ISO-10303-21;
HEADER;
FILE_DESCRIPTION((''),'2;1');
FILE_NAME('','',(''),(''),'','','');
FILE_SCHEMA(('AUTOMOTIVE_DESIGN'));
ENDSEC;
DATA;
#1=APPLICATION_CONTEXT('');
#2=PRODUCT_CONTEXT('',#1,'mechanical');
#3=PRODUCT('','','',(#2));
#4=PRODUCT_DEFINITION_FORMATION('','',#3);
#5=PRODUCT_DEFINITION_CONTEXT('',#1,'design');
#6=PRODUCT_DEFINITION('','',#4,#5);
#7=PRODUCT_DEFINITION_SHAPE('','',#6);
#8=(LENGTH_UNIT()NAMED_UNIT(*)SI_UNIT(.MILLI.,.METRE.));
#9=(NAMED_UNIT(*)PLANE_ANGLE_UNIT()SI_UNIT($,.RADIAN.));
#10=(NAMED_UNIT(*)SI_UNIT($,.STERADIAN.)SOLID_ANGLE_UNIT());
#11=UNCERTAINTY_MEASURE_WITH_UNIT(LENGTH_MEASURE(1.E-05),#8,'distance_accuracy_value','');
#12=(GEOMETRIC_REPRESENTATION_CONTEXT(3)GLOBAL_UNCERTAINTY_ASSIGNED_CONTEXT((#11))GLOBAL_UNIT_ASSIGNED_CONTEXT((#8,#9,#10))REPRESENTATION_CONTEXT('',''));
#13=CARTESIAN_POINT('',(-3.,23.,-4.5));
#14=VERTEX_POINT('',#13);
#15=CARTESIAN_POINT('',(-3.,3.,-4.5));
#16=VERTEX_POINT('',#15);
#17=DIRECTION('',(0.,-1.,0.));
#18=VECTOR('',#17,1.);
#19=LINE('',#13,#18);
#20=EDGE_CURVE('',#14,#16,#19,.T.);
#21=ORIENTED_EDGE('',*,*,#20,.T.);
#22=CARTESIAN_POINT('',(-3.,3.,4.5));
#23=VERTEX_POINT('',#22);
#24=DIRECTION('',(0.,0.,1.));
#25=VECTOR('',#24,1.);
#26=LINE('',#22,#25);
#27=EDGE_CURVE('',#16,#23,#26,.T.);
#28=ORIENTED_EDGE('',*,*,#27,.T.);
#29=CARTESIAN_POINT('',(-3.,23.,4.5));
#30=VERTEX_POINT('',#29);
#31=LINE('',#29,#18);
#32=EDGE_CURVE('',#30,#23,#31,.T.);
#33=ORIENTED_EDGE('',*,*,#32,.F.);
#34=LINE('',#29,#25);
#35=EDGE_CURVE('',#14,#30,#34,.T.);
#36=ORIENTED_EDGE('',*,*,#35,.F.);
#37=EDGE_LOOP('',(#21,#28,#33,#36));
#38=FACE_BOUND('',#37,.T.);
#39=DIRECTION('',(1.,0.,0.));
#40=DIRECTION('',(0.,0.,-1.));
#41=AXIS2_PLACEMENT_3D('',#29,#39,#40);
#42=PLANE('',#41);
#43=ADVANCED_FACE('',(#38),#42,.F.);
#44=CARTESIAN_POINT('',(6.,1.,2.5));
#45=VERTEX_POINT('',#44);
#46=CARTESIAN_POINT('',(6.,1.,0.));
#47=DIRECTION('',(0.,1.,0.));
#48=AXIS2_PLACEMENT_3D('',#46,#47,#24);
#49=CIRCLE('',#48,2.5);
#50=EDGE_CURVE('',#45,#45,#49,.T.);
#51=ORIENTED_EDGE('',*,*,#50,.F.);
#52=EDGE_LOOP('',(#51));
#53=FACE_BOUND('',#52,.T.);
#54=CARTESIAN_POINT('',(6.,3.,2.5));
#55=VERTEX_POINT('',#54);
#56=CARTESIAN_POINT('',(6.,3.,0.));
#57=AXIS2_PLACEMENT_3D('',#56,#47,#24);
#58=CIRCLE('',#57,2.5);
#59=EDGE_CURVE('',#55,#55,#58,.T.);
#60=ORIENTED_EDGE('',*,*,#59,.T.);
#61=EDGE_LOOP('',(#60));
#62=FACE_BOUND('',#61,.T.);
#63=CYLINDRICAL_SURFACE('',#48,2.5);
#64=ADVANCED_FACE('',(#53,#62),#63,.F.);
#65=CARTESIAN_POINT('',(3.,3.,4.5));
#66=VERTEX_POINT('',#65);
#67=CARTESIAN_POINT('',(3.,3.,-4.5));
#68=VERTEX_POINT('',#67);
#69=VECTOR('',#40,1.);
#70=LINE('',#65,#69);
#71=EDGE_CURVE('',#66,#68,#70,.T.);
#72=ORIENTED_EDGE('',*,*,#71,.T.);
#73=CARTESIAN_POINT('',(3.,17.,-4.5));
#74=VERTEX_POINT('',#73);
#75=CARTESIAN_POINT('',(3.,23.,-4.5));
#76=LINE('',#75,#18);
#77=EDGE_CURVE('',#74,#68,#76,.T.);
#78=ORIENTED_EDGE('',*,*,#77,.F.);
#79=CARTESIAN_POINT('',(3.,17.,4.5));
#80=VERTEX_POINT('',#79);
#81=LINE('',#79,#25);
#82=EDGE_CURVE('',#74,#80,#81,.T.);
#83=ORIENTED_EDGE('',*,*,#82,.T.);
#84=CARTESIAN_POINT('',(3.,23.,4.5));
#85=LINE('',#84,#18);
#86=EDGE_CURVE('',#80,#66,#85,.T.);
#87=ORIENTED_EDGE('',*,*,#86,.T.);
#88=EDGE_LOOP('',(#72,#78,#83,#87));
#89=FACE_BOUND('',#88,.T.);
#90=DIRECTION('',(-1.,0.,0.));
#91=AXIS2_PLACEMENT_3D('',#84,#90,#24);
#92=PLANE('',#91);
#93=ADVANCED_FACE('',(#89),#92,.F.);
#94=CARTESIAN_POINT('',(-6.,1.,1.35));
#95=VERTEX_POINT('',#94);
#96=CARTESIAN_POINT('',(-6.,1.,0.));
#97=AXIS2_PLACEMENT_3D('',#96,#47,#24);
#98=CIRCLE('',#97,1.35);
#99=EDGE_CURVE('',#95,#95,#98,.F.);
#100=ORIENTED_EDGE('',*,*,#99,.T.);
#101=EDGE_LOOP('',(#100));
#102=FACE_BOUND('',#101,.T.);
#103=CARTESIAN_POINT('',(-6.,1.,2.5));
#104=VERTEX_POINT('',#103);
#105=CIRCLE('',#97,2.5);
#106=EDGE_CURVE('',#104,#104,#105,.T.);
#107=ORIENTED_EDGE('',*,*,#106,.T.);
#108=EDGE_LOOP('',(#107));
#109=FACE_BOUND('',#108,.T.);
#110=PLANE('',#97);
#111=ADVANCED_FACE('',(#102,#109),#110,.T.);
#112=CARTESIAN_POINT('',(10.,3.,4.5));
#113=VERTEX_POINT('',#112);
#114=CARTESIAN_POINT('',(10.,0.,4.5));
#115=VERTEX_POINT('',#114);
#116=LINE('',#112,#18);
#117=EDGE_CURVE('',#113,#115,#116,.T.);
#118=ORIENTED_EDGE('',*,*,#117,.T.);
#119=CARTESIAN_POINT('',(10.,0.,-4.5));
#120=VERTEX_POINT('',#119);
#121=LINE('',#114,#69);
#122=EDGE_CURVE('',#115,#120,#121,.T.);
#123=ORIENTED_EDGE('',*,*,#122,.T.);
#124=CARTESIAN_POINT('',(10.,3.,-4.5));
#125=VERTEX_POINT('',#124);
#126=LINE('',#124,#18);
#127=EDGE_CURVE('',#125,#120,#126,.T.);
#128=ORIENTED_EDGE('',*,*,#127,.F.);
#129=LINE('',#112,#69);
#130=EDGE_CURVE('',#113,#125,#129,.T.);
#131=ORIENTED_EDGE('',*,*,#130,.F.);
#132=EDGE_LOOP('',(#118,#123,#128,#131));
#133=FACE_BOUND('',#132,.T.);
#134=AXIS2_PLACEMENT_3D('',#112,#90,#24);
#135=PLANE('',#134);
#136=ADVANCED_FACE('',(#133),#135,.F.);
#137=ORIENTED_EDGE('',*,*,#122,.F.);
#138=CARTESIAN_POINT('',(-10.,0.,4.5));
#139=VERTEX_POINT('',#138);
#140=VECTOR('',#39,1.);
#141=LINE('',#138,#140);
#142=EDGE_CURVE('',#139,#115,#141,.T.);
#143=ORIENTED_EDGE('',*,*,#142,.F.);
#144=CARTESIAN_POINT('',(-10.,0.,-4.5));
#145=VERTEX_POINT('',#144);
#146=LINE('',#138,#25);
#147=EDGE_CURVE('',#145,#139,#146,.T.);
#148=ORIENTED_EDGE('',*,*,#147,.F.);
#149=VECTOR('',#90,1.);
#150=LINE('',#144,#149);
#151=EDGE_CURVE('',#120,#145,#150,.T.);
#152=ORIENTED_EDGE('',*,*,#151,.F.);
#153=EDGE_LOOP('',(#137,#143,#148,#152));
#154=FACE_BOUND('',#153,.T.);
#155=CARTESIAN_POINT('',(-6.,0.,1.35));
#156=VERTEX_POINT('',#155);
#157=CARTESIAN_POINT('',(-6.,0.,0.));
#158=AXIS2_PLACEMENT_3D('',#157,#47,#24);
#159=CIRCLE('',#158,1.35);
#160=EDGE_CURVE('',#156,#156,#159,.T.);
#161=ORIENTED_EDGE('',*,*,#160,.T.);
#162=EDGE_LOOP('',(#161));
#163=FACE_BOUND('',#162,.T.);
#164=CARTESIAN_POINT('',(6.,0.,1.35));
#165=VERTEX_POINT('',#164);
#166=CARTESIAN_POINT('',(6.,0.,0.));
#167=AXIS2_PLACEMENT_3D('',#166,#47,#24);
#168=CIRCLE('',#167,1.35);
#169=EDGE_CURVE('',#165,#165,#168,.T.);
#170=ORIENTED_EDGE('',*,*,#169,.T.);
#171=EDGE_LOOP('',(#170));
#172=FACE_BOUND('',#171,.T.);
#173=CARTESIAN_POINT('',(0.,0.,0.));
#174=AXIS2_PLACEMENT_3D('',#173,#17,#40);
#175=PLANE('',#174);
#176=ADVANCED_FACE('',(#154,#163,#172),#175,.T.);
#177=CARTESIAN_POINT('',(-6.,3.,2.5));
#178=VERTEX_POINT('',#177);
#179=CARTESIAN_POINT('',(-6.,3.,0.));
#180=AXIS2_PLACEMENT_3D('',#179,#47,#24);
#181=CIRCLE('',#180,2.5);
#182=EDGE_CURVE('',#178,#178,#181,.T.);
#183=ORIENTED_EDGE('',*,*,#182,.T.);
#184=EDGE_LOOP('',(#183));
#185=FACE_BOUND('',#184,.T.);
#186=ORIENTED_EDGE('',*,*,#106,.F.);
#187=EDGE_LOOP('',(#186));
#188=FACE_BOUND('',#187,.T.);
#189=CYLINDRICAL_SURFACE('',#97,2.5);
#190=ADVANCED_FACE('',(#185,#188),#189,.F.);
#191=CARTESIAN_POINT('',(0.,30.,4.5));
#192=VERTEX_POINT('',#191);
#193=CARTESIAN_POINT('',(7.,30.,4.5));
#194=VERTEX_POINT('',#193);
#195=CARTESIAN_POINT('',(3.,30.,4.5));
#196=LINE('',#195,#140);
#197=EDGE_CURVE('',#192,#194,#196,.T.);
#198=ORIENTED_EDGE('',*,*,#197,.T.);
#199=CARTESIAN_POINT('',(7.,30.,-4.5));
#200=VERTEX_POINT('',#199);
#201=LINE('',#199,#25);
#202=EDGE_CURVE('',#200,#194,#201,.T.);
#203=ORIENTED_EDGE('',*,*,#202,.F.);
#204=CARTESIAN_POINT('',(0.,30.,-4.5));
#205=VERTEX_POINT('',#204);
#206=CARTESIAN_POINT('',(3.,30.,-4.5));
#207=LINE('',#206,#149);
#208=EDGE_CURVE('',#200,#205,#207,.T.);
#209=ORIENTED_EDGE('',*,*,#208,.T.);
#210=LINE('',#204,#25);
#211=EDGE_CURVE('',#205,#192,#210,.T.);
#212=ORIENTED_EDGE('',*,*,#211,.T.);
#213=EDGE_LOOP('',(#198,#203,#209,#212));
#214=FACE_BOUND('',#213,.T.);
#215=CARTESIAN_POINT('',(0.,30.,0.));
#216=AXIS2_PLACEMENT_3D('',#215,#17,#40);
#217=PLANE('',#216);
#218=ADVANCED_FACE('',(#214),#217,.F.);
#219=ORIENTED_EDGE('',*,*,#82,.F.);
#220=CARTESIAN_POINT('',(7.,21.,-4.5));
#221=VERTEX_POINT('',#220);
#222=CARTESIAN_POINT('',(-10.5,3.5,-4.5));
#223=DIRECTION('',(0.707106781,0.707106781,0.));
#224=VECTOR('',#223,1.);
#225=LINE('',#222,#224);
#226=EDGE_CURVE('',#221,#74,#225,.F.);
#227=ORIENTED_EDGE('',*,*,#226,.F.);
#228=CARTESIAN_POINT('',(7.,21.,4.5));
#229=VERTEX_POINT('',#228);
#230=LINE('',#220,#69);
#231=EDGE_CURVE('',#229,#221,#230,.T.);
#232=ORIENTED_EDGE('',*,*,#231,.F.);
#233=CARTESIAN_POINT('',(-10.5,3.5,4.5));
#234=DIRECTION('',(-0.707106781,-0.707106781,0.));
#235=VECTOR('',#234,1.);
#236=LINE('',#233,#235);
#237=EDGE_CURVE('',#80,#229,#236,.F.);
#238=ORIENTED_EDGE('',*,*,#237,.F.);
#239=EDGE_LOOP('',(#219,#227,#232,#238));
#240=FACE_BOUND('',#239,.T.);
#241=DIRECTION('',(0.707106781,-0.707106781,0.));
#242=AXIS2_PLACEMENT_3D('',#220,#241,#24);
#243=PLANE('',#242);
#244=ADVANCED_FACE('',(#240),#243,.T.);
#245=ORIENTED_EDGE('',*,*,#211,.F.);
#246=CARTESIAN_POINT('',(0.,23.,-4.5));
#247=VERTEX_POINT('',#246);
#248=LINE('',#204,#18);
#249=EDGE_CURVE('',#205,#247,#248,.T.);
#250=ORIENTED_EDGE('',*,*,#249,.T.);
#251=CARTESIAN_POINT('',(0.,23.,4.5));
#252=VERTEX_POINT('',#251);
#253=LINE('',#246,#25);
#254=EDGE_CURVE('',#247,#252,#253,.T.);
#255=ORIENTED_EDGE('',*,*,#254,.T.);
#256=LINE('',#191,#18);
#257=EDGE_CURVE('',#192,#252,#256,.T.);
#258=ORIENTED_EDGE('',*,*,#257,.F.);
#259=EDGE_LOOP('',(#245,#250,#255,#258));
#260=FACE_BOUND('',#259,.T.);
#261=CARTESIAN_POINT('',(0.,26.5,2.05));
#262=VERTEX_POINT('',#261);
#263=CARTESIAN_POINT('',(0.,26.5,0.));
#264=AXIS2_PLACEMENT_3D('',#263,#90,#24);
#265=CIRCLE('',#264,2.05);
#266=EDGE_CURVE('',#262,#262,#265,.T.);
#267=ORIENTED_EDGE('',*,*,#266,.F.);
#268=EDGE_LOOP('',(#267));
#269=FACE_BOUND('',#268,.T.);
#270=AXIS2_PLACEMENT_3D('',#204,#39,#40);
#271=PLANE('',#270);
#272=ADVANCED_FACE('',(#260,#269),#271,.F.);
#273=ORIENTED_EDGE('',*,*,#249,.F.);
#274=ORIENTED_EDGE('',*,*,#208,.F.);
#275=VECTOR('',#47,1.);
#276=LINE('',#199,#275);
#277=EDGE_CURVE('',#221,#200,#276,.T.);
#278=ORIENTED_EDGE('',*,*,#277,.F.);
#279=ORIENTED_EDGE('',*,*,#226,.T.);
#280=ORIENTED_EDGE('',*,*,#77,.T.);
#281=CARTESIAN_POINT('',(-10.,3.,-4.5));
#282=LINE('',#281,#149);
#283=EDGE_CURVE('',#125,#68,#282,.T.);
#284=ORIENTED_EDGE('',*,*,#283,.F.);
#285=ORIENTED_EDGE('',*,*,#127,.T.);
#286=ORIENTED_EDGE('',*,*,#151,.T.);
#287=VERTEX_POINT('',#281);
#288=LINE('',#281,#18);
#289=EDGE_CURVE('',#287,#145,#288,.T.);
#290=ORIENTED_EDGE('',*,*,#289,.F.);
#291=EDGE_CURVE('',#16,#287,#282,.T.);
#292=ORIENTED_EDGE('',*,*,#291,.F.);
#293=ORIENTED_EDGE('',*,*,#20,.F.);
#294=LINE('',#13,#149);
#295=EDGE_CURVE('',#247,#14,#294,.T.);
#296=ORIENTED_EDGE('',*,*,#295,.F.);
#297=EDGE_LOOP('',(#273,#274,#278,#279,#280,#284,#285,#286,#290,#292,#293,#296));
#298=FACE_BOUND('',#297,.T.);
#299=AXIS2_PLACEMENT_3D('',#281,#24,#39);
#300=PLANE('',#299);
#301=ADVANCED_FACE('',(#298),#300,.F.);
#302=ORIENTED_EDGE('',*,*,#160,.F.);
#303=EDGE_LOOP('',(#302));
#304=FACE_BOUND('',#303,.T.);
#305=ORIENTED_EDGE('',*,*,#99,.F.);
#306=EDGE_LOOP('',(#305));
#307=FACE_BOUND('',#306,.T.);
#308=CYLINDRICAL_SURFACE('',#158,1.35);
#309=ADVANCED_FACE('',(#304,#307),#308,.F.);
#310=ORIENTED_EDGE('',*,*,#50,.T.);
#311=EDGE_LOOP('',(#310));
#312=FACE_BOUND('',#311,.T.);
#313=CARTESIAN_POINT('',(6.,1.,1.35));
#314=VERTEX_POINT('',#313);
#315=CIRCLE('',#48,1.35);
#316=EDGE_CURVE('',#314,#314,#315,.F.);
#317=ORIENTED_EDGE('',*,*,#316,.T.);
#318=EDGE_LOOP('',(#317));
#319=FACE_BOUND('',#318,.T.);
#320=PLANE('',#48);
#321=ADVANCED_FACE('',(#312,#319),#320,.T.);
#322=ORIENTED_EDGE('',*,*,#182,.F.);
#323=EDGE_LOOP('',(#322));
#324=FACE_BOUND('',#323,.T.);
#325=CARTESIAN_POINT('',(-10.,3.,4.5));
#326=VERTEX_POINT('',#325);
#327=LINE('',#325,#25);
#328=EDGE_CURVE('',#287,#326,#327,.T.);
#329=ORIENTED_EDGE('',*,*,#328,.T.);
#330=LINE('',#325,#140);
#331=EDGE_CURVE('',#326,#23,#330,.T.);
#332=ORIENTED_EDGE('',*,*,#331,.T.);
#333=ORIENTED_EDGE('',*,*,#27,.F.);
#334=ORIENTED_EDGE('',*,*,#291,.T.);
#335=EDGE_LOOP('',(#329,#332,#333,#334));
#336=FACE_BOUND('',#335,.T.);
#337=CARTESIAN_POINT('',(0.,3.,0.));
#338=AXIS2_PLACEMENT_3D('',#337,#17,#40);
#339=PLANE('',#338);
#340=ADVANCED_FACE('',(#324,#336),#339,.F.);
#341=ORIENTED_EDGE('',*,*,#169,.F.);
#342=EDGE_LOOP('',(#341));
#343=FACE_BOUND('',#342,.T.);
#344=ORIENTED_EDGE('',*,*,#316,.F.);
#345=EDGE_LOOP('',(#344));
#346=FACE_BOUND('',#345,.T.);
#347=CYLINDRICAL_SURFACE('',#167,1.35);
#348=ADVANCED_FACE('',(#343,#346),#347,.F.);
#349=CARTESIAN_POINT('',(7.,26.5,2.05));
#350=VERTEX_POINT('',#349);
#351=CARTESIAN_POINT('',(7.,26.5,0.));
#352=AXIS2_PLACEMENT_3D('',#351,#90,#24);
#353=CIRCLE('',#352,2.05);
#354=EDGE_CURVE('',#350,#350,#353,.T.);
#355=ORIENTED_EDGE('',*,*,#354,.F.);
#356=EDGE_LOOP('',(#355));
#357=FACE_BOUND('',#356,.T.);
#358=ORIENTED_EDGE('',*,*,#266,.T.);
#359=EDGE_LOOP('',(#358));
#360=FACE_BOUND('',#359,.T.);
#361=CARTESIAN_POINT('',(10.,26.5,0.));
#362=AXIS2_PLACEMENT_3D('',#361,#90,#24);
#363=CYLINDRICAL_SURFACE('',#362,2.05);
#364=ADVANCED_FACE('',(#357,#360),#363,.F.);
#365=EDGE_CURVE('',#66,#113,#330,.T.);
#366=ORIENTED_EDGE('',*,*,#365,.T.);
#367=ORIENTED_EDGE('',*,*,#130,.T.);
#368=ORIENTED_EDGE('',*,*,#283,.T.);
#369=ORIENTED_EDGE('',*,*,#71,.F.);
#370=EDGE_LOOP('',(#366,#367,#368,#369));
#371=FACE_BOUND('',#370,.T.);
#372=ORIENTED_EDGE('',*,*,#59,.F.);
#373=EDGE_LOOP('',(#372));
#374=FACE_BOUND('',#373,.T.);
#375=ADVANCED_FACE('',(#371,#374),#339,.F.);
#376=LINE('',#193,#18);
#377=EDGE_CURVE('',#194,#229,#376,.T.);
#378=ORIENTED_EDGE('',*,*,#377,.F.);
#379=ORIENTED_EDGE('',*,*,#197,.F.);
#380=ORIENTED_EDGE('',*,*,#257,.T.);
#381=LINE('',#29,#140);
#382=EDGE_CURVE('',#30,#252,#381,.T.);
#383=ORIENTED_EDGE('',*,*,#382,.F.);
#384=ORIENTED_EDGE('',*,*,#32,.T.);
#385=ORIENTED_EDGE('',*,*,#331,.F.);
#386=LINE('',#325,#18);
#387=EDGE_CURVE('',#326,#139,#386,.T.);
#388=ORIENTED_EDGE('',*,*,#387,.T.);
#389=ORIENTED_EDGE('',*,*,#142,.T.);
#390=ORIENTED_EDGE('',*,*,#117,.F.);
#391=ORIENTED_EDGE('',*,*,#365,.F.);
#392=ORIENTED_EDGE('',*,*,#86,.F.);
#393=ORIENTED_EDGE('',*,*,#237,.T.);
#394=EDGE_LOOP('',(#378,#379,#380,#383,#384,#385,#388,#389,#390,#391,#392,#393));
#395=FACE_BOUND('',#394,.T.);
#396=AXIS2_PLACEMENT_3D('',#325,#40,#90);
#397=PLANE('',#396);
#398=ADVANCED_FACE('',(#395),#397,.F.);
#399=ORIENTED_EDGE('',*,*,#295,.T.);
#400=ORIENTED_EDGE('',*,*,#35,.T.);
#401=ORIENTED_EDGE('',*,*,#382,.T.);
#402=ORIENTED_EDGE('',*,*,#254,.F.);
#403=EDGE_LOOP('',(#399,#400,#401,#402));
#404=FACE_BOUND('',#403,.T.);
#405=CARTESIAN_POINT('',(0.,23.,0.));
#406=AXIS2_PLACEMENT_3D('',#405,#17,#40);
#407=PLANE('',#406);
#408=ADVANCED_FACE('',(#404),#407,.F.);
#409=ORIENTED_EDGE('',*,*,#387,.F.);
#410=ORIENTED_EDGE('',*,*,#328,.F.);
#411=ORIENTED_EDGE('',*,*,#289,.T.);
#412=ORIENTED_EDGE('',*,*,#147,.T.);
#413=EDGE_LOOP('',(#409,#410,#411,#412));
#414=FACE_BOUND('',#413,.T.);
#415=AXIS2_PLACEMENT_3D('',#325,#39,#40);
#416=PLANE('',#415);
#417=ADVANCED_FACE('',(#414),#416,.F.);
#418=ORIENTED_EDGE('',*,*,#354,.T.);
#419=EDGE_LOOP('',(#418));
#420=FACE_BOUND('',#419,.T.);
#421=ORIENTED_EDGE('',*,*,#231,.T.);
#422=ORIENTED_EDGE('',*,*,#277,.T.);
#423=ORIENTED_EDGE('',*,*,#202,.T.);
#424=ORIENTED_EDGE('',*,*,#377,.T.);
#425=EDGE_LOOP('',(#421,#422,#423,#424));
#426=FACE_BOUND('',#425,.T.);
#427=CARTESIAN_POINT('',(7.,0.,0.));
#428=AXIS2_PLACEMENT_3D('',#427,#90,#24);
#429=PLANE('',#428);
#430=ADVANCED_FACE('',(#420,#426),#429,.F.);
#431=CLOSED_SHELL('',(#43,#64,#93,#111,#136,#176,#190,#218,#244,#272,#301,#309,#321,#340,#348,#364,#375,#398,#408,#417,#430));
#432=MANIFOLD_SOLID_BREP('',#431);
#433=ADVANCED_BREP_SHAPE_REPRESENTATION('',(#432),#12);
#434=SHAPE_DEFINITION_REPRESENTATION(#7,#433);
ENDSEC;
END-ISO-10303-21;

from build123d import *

# Parameters (mm, degrees)
SKETCH1_W           = 20
SKETCH1_H           = 9
BOSS_EXTRUDE1_DEPTH = 3
SKETCH2_R           = 1.35
CUT_EXTRUDE1_DEPTH  = 12.368817001
SKETCH3_R           = 2.5
CUT_EXTRUDE2_DEPTH  = 2
SKETCH4_W           = 6
SKETCH4_H           = 9
BOSS_EXTRUDE2_DEPTH = 20
SKETCH7_W           = 3
SKETCH7_H           = 9
BOSS_EXTRUDE5_DEPTH = 7
SKETCH8_W           = 9
SKETCH8_H           = 9
BOSS_EXTRUDE6_DEPTH = 4
CHAMFER1_SIZE       = 4
SKETCH9_R           = 2.05
CUT_EXTRUDE3_DEPTH  = 32.941352507


with BuildPart() as part:
    # Sketch1 → Boss-Extrude1 (new body)
    with BuildSketch(Plane(origin=(0, 0, 0), x_dir=(1, 0, 0), z_dir=(0, 1, 0))):
        Rectangle(SKETCH1_W, SKETCH1_H)
    extrude(amount=BOSS_EXTRUDE1_DEPTH)

    # Sketch2 → Cut-Extrude1 (cut, through all)
    with BuildSketch(Plane(origin=(0, 3, 0), x_dir=(1, 0, 0), z_dir=(0, 1, 0))):
        with Locations(Location((-6, 0, 0), (0, 0, 270))):
            Circle(SKETCH2_R)
        with Locations(Location((6, 0, 0), (0, 0, 270))):
            Circle(SKETCH2_R)
    extrude(amount=-CUT_EXTRUDE1_DEPTH, mode=Mode.SUBTRACT)

    # Sketch3 → Cut-Extrude2 (cut)
    with BuildSketch(Plane(origin=(0, 3, 0), x_dir=(1, 0, 0), z_dir=(0, 1, 0))):
        with Locations(Location((-6, 0, 0), (0, 0, 270))):
            Circle(SKETCH3_R)
        with Locations(Location((6, 0, 0), (0, 0, 270))):
            Circle(SKETCH3_R)
    extrude(amount=-CUT_EXTRUDE2_DEPTH, mode=Mode.SUBTRACT)

    # Sketch4 → Boss-Extrude2 (add)
    with BuildSketch(Plane(origin=(0, 3, 0), x_dir=(1, 0, 0), z_dir=(0, 1, 0))):
        Rectangle(SKETCH4_W, SKETCH4_H)
    extrude(amount=BOSS_EXTRUDE2_DEPTH)

    # Sketch7 → Boss-Extrude5 (add)
    with BuildSketch(Plane(origin=(0, 23, 0), x_dir=(1, 0, 0), z_dir=(0, 1, 0))):
        with Locations((1.5, 0)):
            Rectangle(SKETCH7_W, SKETCH7_H)
    extrude(amount=BOSS_EXTRUDE5_DEPTH)

    # Sketch8 → Boss-Extrude6 (add)
    with BuildSketch(Plane(origin=(3, 0, 0), x_dir=(0, 0, -1), z_dir=(1, 0, 0))):
        with Locations((0, 25.5)):
            Rectangle(SKETCH8_W, SKETCH8_H)
    extrude(amount=BOSS_EXTRUDE6_DEPTH)

    # Chamfer1
    chamfer1_edges = [part.edges().sort_by_distance(p)[0] for p in [
        (3, 21, 0),
    ]]
    chamfer(chamfer1_edges, length=CHAMFER1_SIZE - 0.0001)  # a hair under: the kernel refuses the full size

    # Sketch9 → Cut-Extrude3 (cut, through all)
    with BuildSketch(Plane.ZY):
        with Locations((0, 26.5)):
            Circle(SKETCH9_R)
    extrude(amount=-CUT_EXTRUDE3_DEPTH, mode=Mode.SUBTRACT)


solid = part.part
